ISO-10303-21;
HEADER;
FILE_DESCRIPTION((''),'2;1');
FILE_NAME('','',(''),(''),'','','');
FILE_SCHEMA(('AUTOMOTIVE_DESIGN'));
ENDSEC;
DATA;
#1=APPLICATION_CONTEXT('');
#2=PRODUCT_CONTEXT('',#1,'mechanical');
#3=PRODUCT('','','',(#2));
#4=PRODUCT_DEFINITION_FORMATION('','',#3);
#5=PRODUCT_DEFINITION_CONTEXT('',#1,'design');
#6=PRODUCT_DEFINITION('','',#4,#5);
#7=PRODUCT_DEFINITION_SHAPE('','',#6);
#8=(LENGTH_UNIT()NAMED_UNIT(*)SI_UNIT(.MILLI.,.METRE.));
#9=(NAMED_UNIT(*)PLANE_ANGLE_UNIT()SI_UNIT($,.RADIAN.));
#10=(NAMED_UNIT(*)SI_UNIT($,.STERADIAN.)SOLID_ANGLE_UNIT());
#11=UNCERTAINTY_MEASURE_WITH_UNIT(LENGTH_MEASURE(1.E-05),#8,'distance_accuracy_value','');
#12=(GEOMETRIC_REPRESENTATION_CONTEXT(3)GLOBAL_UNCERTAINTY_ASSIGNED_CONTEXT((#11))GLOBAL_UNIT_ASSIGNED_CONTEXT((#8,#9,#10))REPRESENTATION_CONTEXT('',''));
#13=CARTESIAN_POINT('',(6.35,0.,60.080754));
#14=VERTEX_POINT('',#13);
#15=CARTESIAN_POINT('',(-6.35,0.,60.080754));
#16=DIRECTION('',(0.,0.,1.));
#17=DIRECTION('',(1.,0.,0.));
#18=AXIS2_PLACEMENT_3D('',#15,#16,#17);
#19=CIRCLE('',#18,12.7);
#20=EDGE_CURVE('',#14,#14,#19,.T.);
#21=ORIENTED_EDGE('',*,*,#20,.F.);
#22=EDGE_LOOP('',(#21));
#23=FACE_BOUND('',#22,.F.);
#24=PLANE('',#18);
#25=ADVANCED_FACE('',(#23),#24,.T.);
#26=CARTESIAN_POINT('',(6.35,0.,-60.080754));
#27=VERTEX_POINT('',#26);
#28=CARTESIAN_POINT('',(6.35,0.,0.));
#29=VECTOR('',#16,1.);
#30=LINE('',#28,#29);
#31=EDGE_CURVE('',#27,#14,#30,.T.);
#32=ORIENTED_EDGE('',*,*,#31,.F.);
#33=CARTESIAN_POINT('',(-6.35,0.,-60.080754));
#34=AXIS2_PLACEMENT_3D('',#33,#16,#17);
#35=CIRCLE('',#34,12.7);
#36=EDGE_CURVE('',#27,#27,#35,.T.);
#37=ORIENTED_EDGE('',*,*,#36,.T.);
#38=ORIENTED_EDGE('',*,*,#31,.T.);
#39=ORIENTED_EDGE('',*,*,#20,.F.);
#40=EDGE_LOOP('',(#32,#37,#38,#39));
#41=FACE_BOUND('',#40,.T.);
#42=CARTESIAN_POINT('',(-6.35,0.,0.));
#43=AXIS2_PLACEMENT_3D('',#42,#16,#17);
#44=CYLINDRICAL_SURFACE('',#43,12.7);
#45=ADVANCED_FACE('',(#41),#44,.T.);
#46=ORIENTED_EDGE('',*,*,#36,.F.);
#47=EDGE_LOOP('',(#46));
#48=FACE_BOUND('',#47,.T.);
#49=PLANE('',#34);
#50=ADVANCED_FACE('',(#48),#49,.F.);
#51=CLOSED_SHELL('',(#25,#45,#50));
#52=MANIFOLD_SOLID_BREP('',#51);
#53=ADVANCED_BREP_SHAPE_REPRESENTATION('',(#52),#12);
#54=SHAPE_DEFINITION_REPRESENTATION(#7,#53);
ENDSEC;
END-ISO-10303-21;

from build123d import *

# Parameters (mm, degrees)
F0_W = 12.7
F0_H = 120.1615070921


# Not quite as in the source:
# - the program builds the solid bodies; features that only make, move or delete a surface that nothing else refers to are left out


with BuildPart() as f1:
    # F0 (on Front) → F1 (revolve)
    with BuildSketch(Plane.XZ):
        Rectangle(F0_W, F0_H)
    revolve(axis=Axis((-6.35, 0, 0), (0, 0, 1)))


solid = f1.part
